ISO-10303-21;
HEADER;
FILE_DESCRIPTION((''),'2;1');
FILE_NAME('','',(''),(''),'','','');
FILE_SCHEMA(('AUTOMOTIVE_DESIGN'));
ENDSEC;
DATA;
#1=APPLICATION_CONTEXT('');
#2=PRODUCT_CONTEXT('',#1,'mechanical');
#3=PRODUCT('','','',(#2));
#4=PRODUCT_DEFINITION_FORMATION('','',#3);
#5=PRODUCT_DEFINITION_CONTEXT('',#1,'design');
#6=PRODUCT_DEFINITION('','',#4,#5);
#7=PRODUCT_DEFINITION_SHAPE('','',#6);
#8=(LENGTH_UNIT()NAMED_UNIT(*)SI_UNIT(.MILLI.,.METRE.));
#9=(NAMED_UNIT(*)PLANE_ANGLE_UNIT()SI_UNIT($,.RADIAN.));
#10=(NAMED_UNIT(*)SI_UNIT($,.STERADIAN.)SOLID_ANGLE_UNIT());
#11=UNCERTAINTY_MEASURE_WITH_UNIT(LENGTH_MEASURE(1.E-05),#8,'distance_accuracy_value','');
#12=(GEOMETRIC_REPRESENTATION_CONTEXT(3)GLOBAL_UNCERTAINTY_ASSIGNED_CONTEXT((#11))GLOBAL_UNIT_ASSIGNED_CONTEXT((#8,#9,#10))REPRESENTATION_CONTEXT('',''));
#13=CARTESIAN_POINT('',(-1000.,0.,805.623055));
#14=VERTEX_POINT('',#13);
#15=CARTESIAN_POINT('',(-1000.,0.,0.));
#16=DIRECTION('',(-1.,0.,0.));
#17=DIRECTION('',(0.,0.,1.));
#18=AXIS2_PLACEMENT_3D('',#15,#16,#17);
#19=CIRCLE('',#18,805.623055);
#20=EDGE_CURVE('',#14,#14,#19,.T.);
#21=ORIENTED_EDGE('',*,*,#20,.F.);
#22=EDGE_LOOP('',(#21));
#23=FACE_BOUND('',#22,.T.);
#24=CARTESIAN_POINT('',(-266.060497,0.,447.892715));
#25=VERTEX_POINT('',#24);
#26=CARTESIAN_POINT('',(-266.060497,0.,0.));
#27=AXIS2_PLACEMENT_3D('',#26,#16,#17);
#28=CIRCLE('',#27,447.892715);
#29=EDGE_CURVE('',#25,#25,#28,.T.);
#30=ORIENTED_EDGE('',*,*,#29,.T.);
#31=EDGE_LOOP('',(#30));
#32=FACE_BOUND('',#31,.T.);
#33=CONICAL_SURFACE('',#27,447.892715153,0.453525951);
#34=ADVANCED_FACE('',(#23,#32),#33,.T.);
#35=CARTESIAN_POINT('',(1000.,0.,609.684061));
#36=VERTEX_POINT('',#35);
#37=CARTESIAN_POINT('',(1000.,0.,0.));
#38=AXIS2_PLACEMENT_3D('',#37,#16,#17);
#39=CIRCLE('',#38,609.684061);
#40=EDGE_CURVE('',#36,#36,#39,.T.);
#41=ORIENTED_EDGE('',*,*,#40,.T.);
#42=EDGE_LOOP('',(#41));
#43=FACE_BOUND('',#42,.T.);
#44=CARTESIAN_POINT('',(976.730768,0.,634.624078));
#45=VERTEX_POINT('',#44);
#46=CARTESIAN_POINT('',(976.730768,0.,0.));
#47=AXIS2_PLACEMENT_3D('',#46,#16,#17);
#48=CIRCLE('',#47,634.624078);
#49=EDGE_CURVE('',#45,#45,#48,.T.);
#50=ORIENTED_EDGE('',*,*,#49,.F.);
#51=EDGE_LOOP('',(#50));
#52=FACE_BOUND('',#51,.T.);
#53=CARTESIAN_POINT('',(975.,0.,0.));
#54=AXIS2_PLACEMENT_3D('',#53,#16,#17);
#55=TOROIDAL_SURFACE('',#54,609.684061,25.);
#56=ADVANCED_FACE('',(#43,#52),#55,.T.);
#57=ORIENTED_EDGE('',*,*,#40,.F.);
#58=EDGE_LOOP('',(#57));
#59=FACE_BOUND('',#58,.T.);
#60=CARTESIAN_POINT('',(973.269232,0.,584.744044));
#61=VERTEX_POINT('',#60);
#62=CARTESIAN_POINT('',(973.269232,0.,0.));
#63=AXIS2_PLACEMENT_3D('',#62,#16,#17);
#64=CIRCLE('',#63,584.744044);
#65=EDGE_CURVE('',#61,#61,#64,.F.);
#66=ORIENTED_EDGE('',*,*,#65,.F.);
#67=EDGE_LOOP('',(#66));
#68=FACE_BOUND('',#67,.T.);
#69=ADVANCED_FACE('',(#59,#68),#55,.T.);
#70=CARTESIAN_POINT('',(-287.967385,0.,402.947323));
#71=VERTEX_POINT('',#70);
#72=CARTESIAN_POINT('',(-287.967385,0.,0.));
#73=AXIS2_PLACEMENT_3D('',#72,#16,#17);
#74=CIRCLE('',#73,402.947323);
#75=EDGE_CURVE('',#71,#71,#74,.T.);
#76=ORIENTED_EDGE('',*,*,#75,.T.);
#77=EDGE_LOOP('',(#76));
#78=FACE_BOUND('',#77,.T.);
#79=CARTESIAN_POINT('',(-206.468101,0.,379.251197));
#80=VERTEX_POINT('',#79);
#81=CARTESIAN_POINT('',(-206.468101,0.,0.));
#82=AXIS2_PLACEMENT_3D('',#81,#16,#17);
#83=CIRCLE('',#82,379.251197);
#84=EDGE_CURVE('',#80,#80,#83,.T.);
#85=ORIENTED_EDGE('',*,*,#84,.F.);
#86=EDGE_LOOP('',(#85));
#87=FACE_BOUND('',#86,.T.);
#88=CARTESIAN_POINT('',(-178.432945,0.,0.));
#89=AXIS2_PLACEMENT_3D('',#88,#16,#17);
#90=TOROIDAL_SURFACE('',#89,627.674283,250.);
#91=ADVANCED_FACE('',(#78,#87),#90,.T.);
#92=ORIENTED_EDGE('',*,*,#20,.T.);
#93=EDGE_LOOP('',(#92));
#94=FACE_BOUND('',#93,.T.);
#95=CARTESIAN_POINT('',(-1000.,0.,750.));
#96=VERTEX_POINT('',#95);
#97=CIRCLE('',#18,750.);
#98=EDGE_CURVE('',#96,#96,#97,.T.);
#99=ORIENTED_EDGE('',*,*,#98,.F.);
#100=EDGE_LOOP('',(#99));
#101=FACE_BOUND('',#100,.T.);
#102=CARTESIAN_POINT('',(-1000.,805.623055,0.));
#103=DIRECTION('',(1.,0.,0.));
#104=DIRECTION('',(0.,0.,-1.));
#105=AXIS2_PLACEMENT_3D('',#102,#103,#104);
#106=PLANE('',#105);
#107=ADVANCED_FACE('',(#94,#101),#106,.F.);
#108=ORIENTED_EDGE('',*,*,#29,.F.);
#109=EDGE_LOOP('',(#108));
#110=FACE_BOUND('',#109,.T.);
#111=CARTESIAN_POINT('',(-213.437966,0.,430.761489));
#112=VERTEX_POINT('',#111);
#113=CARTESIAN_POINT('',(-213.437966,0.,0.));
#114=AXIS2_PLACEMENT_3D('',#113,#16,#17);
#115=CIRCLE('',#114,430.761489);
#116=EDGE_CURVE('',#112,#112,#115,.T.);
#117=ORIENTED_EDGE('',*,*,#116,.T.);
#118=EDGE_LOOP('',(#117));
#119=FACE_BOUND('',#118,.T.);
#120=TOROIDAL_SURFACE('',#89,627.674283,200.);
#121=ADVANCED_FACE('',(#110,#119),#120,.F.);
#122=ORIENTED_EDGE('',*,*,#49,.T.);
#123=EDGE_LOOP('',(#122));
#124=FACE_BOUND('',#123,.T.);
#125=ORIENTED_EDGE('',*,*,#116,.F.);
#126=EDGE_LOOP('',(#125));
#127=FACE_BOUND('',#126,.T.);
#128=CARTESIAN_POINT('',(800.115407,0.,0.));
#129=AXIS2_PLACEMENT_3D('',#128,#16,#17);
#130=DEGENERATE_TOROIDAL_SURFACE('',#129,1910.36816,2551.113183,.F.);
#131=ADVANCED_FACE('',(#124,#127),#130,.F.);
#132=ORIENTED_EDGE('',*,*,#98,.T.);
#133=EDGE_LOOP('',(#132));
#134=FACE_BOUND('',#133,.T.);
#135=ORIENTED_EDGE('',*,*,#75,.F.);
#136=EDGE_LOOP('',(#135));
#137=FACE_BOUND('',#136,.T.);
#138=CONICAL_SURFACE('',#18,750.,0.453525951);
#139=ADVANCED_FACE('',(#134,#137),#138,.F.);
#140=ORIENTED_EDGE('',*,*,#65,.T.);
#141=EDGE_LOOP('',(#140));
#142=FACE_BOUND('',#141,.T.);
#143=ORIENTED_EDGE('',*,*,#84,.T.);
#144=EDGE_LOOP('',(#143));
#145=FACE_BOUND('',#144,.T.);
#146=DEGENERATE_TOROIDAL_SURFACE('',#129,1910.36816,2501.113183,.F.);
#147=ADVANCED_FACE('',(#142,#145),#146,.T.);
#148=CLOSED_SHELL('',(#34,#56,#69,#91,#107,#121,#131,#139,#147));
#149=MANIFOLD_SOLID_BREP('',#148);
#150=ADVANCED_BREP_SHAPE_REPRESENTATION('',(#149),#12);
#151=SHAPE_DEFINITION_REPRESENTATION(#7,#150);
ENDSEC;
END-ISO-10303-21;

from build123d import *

# Parameters (mm, degrees)
FILLET1_R = 25


with BuildPart() as part:
    # Sketch1 → Revolve1 (revolve)
    with BuildSketch(Plane.XY, mode=Mode.PRIVATE) as revolve1_sk:
        with BuildLine():
            Line((-1000, 750), (-287.96738453, 402.947323104))
            ThreePointArc((-287.96738453, 402.947323104), (-248.23068853, 387.615384192), (-206.46810091, 379.25119654))
            ThreePointArc((-206.46810091, 379.25119654), (384.130769757, 555.909184123), (1000, 582.74501558))
            Line((1000, 582.74501558), (1000, 632.902298406))
            ThreePointArc((1000, 632.902298406), (380.914443639, 606.067618482), (-213.437966267, 430.76148915))
            ThreePointArc((-213.437966267, 430.76148915), (-240.344629809, 437.498198252), (-266.060496719, 447.892715153))
            Line((-266.060496719, 447.892715153), (-1000, 805.62305469))
            Line((-1000, 805.62305469), (-1000, 750))
        make_face()
    revolve(revolve1_sk.sketch.rotate(Axis((-150.527216967, 0, 0), (1, 0, 0)), 90), axis=Axis((-150.527216967, 0, 0), (1, 0, 0)))

    # Fillet1
    # the kernel refuses this fillet: 25 mm, written as the material it takes off along each edge
    with BuildSketch(Plane(origin=(1000, 0, 0), x_dir=(0, 0, 1), z_dir=(0, 1, 0))) as fillet1_piece_1:
        with BuildLine():
            CenterArc((609.684060703, -25), FILLET1_R, 3.96980258, 86.03019742)
            ThreePointArc((634.624077614, -23.269232412), (633.789791115, -11.632647741), (632.902298406, 0))
            Line((632.902298406, 0), (609.684060703, 0))
        make_face()
    revolve(axis=Axis((1000, 0, 0), (1, 0, 0)), mode=Mode.SUBTRACT)
    with BuildSketch(Plane(origin=(1000, 0, 0), x_dir=(0, 0, 1), z_dir=(0, 1, 0))) as fillet1_piece_2:
        with BuildLine():
            CenterArc((609.684060703, -25), FILLET1_R, 90, 93.96980258)
            Line((609.684060703, 0), (582.74501558, 0))
            ThreePointArc((582.74501558, 0), (583.780340457, -13.362705729), (584.744043791, -26.730767588))
        make_face()
    revolve(axis=Axis((1000, 0, 0), (1, 0, 0)), mode=Mode.SUBTRACT)


solid = part.part
